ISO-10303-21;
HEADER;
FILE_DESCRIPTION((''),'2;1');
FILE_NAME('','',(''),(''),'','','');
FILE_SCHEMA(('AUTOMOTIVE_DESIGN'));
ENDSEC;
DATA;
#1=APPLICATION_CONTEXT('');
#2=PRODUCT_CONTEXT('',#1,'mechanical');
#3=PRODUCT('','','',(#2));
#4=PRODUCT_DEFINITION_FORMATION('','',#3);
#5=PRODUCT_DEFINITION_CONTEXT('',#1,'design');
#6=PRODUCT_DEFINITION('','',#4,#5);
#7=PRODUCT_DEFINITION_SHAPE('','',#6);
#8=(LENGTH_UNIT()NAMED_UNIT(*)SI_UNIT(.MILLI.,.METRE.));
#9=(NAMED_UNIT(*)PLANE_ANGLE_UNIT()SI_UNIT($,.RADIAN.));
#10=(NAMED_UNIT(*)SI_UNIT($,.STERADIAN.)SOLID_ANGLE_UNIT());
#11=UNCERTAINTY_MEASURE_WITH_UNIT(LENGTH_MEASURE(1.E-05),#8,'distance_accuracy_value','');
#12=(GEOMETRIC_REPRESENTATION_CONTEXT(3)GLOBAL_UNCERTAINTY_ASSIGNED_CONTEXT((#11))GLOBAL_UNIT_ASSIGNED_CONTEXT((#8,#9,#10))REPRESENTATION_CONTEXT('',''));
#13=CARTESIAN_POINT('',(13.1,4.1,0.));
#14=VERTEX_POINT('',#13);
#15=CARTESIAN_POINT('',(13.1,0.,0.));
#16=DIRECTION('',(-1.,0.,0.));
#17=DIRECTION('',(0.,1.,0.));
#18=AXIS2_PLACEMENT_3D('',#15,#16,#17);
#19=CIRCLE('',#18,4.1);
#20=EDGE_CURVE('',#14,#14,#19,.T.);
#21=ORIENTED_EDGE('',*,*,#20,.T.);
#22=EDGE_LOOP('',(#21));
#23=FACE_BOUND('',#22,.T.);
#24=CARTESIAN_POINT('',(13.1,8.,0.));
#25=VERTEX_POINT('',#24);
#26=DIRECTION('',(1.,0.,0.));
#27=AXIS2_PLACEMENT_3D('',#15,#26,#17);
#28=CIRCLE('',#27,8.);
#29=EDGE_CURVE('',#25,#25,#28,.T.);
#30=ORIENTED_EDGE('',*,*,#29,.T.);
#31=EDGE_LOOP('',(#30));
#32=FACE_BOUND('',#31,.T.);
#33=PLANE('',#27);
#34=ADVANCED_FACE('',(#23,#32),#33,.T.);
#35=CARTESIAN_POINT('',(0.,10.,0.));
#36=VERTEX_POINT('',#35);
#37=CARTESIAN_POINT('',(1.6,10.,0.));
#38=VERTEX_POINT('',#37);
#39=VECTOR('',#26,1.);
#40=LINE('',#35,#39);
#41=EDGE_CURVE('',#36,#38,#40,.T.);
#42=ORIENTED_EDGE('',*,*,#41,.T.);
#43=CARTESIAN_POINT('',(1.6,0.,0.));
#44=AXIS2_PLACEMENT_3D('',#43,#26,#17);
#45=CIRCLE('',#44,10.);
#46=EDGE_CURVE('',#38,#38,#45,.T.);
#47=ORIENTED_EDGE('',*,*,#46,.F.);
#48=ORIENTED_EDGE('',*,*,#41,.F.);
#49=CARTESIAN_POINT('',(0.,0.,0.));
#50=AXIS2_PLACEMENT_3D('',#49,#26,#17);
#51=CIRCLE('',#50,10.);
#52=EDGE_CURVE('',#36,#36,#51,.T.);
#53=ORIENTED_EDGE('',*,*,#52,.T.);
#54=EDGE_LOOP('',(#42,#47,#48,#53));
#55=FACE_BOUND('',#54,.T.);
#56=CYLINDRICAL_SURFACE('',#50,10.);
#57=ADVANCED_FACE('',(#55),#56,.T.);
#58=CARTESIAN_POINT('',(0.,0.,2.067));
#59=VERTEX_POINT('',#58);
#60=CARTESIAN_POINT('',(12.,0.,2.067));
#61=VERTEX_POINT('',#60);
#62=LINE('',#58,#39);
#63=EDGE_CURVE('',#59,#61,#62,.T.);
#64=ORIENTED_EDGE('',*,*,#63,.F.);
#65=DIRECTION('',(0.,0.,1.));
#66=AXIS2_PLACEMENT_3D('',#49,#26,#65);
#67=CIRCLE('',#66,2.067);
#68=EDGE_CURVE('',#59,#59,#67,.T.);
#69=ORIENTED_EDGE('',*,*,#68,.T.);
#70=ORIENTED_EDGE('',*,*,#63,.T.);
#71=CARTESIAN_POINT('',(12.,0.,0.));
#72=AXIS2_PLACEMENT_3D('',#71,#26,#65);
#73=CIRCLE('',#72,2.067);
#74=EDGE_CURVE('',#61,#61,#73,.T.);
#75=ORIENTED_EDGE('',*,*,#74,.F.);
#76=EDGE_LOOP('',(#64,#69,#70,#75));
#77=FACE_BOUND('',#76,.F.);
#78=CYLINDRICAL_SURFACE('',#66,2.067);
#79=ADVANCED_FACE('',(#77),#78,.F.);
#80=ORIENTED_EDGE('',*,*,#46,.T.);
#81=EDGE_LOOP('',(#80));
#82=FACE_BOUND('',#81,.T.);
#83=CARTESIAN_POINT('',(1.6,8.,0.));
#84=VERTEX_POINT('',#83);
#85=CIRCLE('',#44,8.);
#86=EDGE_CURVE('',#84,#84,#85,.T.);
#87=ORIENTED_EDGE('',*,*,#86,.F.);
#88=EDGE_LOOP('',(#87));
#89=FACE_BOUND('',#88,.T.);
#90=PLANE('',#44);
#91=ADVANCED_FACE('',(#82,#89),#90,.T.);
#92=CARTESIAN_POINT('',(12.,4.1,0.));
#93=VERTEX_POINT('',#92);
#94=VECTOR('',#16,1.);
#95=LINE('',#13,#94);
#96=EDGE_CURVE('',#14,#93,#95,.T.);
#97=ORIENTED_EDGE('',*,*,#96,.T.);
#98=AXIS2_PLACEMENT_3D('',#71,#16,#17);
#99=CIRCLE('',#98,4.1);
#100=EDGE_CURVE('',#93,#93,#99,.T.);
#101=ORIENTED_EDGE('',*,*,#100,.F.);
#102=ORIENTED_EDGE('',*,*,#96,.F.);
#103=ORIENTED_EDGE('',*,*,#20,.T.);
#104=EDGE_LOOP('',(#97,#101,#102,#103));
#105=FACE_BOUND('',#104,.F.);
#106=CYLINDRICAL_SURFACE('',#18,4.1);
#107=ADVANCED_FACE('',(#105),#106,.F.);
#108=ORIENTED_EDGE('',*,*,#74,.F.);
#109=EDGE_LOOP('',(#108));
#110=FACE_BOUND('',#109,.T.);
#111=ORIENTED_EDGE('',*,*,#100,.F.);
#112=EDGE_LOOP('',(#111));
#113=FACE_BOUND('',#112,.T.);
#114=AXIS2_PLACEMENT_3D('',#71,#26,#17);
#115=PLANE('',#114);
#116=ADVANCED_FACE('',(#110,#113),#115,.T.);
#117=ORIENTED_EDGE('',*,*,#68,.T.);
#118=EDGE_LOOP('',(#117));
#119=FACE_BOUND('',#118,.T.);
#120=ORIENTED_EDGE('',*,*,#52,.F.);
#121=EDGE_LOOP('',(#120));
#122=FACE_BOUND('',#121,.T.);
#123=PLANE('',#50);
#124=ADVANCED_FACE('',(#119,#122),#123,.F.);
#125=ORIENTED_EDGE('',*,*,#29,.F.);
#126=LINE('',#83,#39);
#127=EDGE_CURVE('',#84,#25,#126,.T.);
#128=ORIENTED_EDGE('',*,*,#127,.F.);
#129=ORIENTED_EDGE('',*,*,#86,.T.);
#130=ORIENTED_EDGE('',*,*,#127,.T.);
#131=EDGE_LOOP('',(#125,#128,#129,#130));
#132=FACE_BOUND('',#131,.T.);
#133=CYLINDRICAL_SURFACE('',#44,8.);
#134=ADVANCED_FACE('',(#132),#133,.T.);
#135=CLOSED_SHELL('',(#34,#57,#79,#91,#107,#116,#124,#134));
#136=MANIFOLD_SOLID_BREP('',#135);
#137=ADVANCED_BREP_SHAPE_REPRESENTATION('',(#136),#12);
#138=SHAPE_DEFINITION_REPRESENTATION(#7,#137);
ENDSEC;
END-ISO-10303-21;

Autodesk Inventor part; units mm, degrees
ref_plane "YZ Plane" through (0, 0, 0) normal (1, 0, 0) x (0, 1, 0)
ref_plane "XZ Plane" through (0, 0, 0) normal (0, 1, 0) x (-1, 0, 0)
ref_plane "XY Plane" through (0, 0, 0) normal (0, 0, 1) x (1, 0, 0)
sketch "Skizze1" plane through (0, 0, 0) normal (0, 0, 1) x (1, 0, 0)
  line L0 (0, 0) -> (0, 10)
  line L1 (0, 10) -> (1.6, 10)
  line L2 (1.6, 10) -> (1.6, 8)
  line L3 (1.6, 8) -> (13.1, 8)
  line L4 (13.1, 8) -> (13.1, 4)
  line L5 (0, 0) -> (12, 0)
  line L6 (13.1, 4) -> (12, 4)
  line L7 (12, 4) -> (12, 0)
  dimension "d0" = 16
  dimension "d1" = 20
  dimension "d2" = 11.5
  dimension "d3" = 1.6
  dimension "d12" = 8
  dimension "d13" = 10.4
revolve "Umdrehung1" add sketch "Skizze1" angle 360 about axis through (0, 0, 0) along (1, 0, 0)
sketch "Skizze2" plane through (0, 0, 0) normal (-1, 0, 0) x (0, 0, 1)
  point P0 (0, 0)
  point P1 (0, 0)
hole "Bohrung1" at (0, 0, 0) direction (1, 0, 0) diameter 4.134 depth 14.2 tip angle 118 thread size "M5x0.8" class "6H" standard "ISO Metric profile"
feature "Verdickung1" [suppressed]
thicken "Verdickung2" operation add thickness 0.1 both sides no extend neighbours yes toward (0, 0.9870503, -0.1604113) faces at (12.7333, 3.9482, -0.6416)
properties part number "SpringCompensation_Innside_SupportPart" material "PBT-Kunststoff"
